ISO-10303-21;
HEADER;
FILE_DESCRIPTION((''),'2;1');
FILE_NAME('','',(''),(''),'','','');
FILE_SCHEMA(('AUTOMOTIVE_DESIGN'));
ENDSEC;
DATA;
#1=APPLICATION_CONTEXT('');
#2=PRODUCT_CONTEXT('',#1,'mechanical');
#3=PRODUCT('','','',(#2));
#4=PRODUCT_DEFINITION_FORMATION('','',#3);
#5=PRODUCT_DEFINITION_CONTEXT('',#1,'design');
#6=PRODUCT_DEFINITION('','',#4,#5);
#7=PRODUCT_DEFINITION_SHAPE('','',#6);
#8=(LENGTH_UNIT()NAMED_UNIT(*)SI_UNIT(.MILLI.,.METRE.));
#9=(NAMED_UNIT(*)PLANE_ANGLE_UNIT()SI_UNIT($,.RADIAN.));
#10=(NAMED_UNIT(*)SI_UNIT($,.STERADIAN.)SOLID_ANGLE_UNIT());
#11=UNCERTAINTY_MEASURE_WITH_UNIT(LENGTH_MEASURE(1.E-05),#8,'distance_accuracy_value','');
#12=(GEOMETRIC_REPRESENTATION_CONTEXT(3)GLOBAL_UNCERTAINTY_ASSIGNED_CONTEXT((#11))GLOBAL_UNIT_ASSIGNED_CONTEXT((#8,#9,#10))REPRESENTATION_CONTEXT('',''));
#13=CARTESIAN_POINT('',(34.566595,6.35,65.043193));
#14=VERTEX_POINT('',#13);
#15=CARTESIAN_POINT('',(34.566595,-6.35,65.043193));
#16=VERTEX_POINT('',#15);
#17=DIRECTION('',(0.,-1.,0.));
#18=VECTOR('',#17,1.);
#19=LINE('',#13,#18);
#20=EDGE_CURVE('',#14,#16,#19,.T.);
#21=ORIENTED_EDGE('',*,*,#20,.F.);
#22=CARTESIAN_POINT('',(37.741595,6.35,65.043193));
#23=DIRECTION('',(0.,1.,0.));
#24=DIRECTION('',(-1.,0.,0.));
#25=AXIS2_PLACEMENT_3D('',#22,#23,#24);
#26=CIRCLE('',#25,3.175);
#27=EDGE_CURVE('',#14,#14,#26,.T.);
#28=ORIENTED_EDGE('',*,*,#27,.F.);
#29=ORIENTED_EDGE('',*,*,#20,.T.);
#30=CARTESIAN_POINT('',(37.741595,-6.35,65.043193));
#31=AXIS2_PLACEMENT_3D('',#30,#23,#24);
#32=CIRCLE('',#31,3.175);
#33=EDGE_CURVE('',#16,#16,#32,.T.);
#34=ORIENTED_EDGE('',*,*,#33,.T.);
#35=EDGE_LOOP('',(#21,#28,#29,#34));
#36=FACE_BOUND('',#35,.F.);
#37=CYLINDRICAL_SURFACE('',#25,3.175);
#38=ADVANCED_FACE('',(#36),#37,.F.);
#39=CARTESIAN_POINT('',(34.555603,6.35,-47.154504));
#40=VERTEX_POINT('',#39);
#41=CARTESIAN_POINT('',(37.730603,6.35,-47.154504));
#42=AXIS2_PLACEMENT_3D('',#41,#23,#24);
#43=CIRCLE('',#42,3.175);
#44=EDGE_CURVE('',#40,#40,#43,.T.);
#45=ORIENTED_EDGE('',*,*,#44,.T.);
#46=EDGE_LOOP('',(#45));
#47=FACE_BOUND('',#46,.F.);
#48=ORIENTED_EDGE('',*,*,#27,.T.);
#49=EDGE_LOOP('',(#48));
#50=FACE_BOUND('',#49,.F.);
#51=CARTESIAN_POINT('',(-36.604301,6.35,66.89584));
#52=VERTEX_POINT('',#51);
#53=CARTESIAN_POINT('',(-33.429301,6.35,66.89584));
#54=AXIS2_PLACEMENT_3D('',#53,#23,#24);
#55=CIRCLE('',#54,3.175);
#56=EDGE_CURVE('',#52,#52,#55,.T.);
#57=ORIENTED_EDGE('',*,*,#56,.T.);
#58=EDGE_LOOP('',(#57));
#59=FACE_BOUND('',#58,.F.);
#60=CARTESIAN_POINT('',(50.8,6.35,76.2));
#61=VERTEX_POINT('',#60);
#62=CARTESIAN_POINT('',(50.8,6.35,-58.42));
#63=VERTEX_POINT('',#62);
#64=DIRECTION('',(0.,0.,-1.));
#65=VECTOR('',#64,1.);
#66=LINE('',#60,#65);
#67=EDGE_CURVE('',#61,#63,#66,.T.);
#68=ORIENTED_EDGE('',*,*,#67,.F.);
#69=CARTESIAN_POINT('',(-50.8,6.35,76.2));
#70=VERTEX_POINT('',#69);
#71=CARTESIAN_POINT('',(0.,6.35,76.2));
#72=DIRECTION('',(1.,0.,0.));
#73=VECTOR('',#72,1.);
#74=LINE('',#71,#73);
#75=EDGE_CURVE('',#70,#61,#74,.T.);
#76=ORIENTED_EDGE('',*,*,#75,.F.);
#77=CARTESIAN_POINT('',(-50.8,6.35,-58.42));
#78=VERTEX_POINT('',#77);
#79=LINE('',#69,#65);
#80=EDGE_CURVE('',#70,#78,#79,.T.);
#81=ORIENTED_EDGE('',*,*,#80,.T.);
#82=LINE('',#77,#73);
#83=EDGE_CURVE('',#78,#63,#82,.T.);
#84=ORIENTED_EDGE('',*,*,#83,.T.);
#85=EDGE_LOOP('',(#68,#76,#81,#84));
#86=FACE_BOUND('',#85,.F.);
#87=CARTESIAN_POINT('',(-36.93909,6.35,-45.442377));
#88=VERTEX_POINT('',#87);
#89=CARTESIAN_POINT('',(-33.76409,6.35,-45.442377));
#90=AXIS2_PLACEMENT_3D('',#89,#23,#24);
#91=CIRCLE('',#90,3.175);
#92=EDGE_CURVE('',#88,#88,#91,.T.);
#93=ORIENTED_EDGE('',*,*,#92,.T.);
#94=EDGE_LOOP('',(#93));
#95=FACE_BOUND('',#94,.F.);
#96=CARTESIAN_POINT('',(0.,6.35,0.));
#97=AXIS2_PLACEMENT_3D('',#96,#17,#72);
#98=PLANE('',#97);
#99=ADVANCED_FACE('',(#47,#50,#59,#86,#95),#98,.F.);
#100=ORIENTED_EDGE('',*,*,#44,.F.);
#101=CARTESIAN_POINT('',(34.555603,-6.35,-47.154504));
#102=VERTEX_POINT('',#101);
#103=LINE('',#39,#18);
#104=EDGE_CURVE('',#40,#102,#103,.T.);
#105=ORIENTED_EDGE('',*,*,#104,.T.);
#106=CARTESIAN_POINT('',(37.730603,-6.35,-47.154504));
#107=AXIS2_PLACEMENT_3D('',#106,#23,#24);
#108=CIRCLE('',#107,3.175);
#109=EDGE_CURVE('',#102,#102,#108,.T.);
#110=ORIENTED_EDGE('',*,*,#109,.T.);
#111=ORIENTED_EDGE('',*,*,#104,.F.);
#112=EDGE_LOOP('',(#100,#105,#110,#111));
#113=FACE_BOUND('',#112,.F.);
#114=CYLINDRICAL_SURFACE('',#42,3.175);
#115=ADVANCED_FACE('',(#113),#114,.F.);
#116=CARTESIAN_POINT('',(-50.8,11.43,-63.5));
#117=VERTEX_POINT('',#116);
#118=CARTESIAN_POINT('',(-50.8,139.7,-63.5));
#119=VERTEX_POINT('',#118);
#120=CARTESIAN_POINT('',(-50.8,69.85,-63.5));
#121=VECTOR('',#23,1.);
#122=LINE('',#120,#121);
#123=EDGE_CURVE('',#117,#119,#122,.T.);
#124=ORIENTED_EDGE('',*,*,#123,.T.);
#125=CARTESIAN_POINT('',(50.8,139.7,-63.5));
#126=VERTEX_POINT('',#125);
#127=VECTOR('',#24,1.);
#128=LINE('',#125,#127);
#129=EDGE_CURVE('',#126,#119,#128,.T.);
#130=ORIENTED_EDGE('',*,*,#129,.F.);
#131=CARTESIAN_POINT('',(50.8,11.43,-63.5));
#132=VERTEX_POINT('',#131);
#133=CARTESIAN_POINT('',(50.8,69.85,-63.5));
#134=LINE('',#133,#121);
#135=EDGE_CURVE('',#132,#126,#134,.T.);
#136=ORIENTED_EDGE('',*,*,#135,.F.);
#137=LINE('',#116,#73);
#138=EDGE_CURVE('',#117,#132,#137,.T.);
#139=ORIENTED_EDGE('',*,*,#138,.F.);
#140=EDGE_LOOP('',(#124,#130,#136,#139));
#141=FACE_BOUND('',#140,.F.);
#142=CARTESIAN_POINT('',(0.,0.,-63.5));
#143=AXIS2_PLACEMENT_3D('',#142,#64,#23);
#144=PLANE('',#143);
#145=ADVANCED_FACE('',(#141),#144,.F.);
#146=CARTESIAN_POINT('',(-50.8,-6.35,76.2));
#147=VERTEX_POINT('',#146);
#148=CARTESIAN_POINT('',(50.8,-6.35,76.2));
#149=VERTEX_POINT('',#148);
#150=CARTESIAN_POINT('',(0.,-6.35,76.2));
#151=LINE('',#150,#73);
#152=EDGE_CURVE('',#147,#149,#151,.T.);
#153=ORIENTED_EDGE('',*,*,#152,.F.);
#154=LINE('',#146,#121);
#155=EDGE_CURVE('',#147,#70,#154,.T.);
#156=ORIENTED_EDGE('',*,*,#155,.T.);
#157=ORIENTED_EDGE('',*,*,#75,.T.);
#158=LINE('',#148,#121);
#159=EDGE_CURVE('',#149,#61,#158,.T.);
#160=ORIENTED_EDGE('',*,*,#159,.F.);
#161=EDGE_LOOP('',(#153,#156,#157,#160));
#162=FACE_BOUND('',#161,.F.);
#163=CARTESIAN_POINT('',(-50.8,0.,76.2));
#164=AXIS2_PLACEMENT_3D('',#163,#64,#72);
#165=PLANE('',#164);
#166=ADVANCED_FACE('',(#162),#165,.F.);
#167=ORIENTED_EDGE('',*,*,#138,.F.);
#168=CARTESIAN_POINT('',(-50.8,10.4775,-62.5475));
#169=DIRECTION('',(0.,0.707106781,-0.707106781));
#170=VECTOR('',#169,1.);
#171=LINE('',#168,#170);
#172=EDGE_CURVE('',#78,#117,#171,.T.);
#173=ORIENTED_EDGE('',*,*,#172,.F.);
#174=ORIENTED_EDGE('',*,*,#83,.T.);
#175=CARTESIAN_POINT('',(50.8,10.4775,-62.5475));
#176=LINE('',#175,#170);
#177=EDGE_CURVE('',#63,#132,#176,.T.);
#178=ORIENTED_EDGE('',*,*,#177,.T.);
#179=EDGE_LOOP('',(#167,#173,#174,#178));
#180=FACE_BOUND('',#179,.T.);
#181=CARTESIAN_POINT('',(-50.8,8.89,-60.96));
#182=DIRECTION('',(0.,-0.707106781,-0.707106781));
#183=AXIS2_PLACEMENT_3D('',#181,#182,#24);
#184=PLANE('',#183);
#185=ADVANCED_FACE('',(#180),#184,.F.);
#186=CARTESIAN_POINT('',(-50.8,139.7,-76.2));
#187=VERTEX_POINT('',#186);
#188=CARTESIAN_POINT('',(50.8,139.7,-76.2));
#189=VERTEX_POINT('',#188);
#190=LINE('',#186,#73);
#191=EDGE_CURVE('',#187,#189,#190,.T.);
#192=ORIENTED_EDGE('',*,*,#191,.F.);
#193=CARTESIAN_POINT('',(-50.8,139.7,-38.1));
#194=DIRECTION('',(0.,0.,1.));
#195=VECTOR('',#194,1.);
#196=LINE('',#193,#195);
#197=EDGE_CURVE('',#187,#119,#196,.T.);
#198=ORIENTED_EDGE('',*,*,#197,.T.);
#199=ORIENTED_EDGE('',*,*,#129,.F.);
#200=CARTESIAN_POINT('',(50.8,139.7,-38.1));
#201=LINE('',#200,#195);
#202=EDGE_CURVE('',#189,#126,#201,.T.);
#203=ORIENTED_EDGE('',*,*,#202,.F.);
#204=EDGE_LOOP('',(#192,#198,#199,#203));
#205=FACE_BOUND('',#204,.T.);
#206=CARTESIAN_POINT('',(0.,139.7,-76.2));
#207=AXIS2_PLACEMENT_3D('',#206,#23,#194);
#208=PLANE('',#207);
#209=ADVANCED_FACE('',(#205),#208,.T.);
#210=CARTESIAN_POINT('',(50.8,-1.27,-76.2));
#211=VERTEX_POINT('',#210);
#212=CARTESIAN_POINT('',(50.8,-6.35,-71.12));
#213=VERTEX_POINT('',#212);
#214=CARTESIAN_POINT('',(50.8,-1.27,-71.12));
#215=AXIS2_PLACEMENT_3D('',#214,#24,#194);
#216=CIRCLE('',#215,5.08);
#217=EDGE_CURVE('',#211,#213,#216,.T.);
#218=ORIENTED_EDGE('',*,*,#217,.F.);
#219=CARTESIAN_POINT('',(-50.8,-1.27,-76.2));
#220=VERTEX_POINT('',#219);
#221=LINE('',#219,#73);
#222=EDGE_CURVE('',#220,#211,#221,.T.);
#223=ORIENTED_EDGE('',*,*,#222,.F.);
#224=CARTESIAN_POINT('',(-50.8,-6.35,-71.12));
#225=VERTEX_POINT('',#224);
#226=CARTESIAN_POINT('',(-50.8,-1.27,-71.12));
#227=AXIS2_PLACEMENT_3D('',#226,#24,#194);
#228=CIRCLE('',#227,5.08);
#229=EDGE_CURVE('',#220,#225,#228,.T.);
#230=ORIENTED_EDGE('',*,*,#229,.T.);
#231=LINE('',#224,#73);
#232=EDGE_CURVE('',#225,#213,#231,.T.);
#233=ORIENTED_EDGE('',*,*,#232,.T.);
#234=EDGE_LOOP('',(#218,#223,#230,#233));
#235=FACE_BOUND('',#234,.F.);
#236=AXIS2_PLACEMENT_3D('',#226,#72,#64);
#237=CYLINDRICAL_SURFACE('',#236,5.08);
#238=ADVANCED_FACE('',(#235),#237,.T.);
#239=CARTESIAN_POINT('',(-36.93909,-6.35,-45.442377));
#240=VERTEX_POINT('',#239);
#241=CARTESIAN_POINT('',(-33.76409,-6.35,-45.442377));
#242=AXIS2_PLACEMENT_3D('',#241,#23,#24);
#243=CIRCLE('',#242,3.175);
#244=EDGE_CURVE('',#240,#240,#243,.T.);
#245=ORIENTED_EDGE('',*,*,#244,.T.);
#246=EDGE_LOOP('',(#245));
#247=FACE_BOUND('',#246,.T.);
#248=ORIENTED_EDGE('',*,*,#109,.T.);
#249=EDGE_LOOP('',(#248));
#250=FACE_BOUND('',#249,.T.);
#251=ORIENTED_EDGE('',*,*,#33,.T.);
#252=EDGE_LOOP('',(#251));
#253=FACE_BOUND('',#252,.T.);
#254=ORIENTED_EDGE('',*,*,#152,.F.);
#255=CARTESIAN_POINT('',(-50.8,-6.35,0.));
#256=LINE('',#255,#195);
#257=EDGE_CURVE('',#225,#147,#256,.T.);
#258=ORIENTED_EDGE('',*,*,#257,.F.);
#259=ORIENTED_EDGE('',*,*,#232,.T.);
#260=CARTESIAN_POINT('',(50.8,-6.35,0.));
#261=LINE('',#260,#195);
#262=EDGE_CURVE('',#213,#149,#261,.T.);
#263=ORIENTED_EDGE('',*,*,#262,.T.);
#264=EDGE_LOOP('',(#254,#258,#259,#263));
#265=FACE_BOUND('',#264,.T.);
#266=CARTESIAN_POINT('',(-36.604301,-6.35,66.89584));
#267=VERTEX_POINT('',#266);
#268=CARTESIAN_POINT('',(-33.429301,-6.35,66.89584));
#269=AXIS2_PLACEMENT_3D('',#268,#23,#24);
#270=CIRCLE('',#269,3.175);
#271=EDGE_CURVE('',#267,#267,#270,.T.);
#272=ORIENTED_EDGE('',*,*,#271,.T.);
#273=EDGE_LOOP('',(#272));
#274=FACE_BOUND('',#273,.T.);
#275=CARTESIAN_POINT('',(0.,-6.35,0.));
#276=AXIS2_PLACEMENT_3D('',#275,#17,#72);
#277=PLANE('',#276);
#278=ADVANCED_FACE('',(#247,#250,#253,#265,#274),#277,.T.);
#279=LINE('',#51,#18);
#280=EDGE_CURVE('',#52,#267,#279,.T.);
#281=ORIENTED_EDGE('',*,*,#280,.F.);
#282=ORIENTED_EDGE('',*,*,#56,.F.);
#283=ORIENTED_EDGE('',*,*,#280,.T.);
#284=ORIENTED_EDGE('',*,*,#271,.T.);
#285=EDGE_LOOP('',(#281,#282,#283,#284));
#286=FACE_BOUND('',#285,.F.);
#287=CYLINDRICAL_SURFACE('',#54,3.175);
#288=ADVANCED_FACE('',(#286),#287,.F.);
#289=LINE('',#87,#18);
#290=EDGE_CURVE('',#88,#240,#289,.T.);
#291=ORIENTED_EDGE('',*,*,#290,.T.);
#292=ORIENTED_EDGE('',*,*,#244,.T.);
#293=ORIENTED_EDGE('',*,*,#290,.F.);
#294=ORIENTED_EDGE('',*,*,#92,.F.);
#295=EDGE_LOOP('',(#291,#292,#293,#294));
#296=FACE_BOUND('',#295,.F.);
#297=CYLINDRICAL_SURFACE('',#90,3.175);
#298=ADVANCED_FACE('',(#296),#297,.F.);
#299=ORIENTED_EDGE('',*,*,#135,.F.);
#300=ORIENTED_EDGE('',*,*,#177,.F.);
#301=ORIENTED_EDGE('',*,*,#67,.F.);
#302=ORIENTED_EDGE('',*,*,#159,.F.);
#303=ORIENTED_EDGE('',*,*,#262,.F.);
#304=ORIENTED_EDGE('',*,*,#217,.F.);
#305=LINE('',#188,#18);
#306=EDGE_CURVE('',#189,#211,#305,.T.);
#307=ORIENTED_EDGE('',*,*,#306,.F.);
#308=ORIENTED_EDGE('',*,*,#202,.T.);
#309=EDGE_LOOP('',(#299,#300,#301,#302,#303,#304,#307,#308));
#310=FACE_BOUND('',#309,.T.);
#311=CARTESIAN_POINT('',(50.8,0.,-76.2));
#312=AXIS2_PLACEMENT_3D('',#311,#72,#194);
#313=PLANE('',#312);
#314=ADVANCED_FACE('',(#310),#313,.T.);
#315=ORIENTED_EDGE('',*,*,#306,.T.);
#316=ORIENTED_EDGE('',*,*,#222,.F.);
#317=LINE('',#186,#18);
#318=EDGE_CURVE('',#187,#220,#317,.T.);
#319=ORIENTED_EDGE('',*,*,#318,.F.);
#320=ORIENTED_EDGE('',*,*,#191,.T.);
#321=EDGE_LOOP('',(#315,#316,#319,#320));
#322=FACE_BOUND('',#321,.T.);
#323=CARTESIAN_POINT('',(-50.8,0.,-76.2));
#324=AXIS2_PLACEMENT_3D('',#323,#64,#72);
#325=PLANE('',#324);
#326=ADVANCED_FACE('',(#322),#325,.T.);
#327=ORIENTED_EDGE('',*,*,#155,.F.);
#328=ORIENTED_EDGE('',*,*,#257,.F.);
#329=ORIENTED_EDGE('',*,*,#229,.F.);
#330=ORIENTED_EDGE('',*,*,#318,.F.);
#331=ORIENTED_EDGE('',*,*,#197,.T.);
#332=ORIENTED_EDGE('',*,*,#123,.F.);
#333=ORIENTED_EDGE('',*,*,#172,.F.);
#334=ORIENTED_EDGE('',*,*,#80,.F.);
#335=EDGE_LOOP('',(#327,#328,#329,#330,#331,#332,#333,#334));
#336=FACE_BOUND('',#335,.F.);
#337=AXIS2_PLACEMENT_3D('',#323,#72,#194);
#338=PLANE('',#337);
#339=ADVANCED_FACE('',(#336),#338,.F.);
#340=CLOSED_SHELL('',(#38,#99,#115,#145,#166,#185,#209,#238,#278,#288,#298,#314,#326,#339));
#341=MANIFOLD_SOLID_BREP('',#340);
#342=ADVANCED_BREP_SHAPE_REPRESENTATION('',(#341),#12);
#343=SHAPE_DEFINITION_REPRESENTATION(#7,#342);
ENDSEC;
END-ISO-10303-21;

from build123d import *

# Parameters (mm, degrees)
F0_W     = 101.6
F0_H     = 152.4
F1_DEPTH = 6.35
F2_W     = 139.7
F2_H     = 76.2
F3_DEPTH = 50.8
F4_DEPTH = 63.5
F5_SIZE  = 5.08
F6_R     = 5.08
F7_R     = 3.175
F8_DEPTH = 12.7


with BuildPart() as f1:
    # F0 (on Front) → F1 (new body, symmetric)
    with BuildSketch(Plane.XZ):
        Rectangle(F0_W, F0_H)
    extrude(amount=F1_DEPTH, both=True)

    # F2 (on Right) → F3 (join, symmetric)
    with BuildSketch(Plane.YZ):
        with Locations((69.85, -38.1)):
            Rectangle(F2_W, F2_H)
    extrude(amount=F3_DEPTH, both=True)

    # F4 (cut): a face of the model
    f4_faces = [f1.faces().sort_by_distance(p)[0] for p in [
        (0, 73.025, 0),
    ]]
    extrude(f4_faces, amount=-F4_DEPTH, mode=Mode.SUBTRACT)

    # F5
    f5_edges = [f1.edges().sort_by_distance(p)[0] for p in [
        (0, 6.35, -63.5),
    ]]
    chamfer(f5_edges, length=F5_SIZE)

    # F6
    f6_edges = [f1.edges().sort_by_distance(p)[0] for p in [
        (0, -6.35, -76.2),
    ]]
    fillet(f6_edges, radius=F6_R)

    # F7 (on face) → F8 (cut)
    with BuildSketch(Plane(origin=(0, 6.35, 0), x_dir=(-1, 0, 0), z_dir=(0, 1, 0))):
        with Locations((-37.7415953271, 65.0431930406)):
            Circle(F7_R)
        with Locations((33.4293011874, 66.8958395785)):
            Circle(F7_R)
        with Locations((33.7640900696, -45.4423770942)):
            Circle(F7_R)
        with Locations((-37.7306027449, -47.1545040206)):
            Circle(F7_R)
    extrude(amount=-F8_DEPTH, mode=Mode.SUBTRACT)


solid = f1.part
